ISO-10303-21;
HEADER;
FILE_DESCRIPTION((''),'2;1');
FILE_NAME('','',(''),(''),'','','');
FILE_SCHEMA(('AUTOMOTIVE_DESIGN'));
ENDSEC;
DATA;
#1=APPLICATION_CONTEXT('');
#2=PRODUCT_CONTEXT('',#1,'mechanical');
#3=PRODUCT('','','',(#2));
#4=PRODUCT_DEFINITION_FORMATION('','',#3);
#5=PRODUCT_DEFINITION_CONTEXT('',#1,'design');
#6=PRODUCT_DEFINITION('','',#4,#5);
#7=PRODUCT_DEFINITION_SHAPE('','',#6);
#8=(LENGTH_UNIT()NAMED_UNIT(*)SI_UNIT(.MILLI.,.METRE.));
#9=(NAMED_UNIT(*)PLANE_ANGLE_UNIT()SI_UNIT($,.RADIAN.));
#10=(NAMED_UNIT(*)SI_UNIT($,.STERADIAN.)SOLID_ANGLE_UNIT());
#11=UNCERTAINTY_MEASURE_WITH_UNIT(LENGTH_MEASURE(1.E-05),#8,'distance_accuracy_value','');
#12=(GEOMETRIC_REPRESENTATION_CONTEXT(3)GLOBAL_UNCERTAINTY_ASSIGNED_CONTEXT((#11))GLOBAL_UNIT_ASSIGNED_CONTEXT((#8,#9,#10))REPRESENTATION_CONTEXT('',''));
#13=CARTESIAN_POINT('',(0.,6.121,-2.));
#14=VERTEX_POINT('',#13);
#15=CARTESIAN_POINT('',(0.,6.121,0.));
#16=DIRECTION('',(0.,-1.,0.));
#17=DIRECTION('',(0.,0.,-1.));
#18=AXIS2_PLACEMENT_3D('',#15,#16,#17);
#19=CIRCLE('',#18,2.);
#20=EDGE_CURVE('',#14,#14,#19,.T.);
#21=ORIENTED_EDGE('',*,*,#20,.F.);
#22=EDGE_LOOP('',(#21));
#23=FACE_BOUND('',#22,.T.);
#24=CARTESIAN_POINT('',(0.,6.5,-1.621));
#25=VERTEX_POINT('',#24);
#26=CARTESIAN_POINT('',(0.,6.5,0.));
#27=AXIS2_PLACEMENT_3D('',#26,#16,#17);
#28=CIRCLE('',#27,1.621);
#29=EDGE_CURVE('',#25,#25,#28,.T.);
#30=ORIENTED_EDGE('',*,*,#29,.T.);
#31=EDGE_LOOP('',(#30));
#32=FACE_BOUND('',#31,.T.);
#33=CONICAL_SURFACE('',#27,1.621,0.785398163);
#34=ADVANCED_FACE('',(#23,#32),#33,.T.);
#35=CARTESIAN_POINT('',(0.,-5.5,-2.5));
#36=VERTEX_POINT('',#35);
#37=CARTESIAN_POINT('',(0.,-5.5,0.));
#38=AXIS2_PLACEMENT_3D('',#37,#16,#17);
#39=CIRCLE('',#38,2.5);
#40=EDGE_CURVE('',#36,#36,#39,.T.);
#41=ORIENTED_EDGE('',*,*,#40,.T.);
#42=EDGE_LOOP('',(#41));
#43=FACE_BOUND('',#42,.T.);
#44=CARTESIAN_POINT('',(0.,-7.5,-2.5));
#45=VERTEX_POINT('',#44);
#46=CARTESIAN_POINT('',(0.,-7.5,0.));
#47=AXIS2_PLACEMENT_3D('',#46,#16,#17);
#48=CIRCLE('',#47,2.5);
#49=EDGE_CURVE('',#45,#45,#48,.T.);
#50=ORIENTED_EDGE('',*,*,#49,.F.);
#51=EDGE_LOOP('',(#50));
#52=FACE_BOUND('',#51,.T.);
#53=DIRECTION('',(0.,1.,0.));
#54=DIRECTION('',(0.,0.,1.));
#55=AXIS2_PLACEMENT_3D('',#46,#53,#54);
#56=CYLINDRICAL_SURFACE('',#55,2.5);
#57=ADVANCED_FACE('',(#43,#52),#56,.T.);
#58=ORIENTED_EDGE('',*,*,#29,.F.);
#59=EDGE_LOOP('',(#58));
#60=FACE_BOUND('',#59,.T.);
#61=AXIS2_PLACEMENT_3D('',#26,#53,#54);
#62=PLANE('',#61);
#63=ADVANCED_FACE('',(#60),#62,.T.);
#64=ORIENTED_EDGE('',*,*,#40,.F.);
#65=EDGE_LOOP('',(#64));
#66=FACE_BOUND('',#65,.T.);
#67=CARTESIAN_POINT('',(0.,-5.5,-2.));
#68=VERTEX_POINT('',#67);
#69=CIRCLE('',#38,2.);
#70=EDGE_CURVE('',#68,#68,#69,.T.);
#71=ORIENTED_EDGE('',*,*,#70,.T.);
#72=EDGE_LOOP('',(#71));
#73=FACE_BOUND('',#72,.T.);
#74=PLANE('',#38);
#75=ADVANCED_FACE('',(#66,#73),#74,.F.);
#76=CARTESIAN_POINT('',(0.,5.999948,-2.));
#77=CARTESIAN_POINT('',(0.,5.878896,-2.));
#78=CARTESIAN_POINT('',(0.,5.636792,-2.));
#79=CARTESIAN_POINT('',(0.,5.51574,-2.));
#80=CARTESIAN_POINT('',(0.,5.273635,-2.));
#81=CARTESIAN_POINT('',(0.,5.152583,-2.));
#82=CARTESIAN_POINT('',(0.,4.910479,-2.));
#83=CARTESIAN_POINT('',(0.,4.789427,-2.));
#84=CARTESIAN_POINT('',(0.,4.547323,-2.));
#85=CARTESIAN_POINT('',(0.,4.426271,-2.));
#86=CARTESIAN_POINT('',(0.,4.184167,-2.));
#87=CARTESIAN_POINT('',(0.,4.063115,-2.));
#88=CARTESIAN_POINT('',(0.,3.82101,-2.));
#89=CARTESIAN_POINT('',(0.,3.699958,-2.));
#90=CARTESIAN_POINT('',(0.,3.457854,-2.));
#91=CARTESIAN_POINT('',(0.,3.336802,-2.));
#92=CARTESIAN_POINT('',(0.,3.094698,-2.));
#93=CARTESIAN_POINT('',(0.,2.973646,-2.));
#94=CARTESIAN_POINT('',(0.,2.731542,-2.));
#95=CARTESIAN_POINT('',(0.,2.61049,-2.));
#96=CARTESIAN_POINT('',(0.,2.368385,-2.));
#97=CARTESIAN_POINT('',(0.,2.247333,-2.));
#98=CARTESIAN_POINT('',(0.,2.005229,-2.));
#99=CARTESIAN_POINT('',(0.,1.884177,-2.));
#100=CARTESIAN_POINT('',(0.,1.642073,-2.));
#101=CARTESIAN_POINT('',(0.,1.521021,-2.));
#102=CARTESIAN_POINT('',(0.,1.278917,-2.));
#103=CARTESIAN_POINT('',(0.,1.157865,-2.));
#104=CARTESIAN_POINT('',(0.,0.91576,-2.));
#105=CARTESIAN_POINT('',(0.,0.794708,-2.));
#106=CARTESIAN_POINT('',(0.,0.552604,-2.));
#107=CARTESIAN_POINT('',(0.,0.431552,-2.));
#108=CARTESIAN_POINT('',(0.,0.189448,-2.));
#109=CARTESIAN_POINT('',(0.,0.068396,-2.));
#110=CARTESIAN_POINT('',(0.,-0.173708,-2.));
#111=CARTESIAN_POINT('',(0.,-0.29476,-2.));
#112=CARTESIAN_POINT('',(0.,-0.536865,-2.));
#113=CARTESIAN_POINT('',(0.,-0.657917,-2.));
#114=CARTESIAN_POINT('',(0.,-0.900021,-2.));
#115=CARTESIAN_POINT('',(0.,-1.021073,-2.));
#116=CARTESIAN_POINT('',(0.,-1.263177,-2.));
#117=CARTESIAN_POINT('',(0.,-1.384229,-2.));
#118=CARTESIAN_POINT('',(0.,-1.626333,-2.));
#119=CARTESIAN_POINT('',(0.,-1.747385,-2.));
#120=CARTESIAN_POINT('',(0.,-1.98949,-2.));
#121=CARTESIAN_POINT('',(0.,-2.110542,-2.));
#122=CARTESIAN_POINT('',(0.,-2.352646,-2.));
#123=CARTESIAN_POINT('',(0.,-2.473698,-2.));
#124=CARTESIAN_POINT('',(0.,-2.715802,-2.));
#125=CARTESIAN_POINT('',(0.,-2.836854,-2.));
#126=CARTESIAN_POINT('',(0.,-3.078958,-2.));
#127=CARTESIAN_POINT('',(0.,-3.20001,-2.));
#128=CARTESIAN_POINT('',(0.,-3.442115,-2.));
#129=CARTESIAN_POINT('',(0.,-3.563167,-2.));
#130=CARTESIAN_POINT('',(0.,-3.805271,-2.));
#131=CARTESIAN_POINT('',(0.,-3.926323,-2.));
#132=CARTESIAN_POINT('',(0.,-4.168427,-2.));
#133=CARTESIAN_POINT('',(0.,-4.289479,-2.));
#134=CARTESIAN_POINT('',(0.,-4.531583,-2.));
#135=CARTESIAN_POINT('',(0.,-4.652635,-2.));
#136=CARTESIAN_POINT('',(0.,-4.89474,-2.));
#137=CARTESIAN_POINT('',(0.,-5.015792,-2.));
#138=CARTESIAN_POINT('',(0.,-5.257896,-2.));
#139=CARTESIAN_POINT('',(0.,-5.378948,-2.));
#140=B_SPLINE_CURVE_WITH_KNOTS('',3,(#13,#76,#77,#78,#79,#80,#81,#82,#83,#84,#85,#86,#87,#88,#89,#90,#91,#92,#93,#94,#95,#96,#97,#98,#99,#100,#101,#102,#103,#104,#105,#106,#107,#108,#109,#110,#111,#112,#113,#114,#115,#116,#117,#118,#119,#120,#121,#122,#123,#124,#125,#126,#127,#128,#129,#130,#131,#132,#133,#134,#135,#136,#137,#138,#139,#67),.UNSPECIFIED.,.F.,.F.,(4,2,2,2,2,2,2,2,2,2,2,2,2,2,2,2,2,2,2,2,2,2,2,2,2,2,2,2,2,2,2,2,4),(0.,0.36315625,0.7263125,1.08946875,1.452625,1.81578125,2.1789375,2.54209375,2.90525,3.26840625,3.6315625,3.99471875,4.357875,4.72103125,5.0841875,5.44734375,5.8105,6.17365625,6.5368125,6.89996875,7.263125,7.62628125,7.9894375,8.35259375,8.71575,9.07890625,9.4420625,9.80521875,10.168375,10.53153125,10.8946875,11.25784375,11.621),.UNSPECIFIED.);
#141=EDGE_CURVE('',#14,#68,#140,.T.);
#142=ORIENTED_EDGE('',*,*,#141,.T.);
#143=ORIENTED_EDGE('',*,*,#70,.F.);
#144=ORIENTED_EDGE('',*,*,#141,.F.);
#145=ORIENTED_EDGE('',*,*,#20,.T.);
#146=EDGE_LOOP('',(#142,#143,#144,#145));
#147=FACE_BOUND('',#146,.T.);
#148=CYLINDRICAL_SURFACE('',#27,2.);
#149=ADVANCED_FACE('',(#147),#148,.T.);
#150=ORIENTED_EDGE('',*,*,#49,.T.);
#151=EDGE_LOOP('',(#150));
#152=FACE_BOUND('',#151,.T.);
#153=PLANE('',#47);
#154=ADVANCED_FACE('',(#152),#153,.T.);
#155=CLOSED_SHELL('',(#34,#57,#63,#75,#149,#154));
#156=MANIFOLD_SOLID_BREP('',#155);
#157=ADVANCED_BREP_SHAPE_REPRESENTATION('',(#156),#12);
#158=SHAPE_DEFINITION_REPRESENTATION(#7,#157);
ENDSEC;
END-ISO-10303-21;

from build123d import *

# Parameters (mm, degrees)
SKETCH_1_R      = 2
EXTRUDE_1_DEPTH = 6.5
EXTRUDE_START   = 1
SKETCH_2_R      = 2.5
EXTRUDE_2_DEPTH = 2


# Read off the part's stored shape, not the designer's step: M4 机械螺纹 螺柱1
with BuildPart() as part:
    # 草图1 → 凸台-拉伸1 (new, symmetric)
    with BuildSketch(Plane(origin=(0, 0, 0), x_dir=(1, 0, 0), z_dir=(0, 1, 0))):
        with Locations(Location((0, 0, 0), (0, 0, 90))):
            Circle(SKETCH_1_R)
    extrude(amount=EXTRUDE_1_DEPTH, both=True)

    # 草图2 → 凸台-拉伸2 (add)
    with BuildSketch(Plane.XZ.offset(6.5).offset(EXTRUDE_START)):
        with Locations(Location((0, 0, 0), (0, 0, 270))):
            Circle(SKETCH_2_R)
    extrude(amount=-EXTRUDE_2_DEPTH)

    # M4 机械螺纹 螺柱1 outline → M4 机械螺纹 螺柱1 (revolve, cut)
    with BuildSketch(Plane.XY):
        Polygon((2, 6.5), (1.621, 6.5), (2, 6.121), align=None)
    revolve(axis=Axis((0, 0, 0), (0, 1, 0)), mode=Mode.SUBTRACT)


solid = part.part
